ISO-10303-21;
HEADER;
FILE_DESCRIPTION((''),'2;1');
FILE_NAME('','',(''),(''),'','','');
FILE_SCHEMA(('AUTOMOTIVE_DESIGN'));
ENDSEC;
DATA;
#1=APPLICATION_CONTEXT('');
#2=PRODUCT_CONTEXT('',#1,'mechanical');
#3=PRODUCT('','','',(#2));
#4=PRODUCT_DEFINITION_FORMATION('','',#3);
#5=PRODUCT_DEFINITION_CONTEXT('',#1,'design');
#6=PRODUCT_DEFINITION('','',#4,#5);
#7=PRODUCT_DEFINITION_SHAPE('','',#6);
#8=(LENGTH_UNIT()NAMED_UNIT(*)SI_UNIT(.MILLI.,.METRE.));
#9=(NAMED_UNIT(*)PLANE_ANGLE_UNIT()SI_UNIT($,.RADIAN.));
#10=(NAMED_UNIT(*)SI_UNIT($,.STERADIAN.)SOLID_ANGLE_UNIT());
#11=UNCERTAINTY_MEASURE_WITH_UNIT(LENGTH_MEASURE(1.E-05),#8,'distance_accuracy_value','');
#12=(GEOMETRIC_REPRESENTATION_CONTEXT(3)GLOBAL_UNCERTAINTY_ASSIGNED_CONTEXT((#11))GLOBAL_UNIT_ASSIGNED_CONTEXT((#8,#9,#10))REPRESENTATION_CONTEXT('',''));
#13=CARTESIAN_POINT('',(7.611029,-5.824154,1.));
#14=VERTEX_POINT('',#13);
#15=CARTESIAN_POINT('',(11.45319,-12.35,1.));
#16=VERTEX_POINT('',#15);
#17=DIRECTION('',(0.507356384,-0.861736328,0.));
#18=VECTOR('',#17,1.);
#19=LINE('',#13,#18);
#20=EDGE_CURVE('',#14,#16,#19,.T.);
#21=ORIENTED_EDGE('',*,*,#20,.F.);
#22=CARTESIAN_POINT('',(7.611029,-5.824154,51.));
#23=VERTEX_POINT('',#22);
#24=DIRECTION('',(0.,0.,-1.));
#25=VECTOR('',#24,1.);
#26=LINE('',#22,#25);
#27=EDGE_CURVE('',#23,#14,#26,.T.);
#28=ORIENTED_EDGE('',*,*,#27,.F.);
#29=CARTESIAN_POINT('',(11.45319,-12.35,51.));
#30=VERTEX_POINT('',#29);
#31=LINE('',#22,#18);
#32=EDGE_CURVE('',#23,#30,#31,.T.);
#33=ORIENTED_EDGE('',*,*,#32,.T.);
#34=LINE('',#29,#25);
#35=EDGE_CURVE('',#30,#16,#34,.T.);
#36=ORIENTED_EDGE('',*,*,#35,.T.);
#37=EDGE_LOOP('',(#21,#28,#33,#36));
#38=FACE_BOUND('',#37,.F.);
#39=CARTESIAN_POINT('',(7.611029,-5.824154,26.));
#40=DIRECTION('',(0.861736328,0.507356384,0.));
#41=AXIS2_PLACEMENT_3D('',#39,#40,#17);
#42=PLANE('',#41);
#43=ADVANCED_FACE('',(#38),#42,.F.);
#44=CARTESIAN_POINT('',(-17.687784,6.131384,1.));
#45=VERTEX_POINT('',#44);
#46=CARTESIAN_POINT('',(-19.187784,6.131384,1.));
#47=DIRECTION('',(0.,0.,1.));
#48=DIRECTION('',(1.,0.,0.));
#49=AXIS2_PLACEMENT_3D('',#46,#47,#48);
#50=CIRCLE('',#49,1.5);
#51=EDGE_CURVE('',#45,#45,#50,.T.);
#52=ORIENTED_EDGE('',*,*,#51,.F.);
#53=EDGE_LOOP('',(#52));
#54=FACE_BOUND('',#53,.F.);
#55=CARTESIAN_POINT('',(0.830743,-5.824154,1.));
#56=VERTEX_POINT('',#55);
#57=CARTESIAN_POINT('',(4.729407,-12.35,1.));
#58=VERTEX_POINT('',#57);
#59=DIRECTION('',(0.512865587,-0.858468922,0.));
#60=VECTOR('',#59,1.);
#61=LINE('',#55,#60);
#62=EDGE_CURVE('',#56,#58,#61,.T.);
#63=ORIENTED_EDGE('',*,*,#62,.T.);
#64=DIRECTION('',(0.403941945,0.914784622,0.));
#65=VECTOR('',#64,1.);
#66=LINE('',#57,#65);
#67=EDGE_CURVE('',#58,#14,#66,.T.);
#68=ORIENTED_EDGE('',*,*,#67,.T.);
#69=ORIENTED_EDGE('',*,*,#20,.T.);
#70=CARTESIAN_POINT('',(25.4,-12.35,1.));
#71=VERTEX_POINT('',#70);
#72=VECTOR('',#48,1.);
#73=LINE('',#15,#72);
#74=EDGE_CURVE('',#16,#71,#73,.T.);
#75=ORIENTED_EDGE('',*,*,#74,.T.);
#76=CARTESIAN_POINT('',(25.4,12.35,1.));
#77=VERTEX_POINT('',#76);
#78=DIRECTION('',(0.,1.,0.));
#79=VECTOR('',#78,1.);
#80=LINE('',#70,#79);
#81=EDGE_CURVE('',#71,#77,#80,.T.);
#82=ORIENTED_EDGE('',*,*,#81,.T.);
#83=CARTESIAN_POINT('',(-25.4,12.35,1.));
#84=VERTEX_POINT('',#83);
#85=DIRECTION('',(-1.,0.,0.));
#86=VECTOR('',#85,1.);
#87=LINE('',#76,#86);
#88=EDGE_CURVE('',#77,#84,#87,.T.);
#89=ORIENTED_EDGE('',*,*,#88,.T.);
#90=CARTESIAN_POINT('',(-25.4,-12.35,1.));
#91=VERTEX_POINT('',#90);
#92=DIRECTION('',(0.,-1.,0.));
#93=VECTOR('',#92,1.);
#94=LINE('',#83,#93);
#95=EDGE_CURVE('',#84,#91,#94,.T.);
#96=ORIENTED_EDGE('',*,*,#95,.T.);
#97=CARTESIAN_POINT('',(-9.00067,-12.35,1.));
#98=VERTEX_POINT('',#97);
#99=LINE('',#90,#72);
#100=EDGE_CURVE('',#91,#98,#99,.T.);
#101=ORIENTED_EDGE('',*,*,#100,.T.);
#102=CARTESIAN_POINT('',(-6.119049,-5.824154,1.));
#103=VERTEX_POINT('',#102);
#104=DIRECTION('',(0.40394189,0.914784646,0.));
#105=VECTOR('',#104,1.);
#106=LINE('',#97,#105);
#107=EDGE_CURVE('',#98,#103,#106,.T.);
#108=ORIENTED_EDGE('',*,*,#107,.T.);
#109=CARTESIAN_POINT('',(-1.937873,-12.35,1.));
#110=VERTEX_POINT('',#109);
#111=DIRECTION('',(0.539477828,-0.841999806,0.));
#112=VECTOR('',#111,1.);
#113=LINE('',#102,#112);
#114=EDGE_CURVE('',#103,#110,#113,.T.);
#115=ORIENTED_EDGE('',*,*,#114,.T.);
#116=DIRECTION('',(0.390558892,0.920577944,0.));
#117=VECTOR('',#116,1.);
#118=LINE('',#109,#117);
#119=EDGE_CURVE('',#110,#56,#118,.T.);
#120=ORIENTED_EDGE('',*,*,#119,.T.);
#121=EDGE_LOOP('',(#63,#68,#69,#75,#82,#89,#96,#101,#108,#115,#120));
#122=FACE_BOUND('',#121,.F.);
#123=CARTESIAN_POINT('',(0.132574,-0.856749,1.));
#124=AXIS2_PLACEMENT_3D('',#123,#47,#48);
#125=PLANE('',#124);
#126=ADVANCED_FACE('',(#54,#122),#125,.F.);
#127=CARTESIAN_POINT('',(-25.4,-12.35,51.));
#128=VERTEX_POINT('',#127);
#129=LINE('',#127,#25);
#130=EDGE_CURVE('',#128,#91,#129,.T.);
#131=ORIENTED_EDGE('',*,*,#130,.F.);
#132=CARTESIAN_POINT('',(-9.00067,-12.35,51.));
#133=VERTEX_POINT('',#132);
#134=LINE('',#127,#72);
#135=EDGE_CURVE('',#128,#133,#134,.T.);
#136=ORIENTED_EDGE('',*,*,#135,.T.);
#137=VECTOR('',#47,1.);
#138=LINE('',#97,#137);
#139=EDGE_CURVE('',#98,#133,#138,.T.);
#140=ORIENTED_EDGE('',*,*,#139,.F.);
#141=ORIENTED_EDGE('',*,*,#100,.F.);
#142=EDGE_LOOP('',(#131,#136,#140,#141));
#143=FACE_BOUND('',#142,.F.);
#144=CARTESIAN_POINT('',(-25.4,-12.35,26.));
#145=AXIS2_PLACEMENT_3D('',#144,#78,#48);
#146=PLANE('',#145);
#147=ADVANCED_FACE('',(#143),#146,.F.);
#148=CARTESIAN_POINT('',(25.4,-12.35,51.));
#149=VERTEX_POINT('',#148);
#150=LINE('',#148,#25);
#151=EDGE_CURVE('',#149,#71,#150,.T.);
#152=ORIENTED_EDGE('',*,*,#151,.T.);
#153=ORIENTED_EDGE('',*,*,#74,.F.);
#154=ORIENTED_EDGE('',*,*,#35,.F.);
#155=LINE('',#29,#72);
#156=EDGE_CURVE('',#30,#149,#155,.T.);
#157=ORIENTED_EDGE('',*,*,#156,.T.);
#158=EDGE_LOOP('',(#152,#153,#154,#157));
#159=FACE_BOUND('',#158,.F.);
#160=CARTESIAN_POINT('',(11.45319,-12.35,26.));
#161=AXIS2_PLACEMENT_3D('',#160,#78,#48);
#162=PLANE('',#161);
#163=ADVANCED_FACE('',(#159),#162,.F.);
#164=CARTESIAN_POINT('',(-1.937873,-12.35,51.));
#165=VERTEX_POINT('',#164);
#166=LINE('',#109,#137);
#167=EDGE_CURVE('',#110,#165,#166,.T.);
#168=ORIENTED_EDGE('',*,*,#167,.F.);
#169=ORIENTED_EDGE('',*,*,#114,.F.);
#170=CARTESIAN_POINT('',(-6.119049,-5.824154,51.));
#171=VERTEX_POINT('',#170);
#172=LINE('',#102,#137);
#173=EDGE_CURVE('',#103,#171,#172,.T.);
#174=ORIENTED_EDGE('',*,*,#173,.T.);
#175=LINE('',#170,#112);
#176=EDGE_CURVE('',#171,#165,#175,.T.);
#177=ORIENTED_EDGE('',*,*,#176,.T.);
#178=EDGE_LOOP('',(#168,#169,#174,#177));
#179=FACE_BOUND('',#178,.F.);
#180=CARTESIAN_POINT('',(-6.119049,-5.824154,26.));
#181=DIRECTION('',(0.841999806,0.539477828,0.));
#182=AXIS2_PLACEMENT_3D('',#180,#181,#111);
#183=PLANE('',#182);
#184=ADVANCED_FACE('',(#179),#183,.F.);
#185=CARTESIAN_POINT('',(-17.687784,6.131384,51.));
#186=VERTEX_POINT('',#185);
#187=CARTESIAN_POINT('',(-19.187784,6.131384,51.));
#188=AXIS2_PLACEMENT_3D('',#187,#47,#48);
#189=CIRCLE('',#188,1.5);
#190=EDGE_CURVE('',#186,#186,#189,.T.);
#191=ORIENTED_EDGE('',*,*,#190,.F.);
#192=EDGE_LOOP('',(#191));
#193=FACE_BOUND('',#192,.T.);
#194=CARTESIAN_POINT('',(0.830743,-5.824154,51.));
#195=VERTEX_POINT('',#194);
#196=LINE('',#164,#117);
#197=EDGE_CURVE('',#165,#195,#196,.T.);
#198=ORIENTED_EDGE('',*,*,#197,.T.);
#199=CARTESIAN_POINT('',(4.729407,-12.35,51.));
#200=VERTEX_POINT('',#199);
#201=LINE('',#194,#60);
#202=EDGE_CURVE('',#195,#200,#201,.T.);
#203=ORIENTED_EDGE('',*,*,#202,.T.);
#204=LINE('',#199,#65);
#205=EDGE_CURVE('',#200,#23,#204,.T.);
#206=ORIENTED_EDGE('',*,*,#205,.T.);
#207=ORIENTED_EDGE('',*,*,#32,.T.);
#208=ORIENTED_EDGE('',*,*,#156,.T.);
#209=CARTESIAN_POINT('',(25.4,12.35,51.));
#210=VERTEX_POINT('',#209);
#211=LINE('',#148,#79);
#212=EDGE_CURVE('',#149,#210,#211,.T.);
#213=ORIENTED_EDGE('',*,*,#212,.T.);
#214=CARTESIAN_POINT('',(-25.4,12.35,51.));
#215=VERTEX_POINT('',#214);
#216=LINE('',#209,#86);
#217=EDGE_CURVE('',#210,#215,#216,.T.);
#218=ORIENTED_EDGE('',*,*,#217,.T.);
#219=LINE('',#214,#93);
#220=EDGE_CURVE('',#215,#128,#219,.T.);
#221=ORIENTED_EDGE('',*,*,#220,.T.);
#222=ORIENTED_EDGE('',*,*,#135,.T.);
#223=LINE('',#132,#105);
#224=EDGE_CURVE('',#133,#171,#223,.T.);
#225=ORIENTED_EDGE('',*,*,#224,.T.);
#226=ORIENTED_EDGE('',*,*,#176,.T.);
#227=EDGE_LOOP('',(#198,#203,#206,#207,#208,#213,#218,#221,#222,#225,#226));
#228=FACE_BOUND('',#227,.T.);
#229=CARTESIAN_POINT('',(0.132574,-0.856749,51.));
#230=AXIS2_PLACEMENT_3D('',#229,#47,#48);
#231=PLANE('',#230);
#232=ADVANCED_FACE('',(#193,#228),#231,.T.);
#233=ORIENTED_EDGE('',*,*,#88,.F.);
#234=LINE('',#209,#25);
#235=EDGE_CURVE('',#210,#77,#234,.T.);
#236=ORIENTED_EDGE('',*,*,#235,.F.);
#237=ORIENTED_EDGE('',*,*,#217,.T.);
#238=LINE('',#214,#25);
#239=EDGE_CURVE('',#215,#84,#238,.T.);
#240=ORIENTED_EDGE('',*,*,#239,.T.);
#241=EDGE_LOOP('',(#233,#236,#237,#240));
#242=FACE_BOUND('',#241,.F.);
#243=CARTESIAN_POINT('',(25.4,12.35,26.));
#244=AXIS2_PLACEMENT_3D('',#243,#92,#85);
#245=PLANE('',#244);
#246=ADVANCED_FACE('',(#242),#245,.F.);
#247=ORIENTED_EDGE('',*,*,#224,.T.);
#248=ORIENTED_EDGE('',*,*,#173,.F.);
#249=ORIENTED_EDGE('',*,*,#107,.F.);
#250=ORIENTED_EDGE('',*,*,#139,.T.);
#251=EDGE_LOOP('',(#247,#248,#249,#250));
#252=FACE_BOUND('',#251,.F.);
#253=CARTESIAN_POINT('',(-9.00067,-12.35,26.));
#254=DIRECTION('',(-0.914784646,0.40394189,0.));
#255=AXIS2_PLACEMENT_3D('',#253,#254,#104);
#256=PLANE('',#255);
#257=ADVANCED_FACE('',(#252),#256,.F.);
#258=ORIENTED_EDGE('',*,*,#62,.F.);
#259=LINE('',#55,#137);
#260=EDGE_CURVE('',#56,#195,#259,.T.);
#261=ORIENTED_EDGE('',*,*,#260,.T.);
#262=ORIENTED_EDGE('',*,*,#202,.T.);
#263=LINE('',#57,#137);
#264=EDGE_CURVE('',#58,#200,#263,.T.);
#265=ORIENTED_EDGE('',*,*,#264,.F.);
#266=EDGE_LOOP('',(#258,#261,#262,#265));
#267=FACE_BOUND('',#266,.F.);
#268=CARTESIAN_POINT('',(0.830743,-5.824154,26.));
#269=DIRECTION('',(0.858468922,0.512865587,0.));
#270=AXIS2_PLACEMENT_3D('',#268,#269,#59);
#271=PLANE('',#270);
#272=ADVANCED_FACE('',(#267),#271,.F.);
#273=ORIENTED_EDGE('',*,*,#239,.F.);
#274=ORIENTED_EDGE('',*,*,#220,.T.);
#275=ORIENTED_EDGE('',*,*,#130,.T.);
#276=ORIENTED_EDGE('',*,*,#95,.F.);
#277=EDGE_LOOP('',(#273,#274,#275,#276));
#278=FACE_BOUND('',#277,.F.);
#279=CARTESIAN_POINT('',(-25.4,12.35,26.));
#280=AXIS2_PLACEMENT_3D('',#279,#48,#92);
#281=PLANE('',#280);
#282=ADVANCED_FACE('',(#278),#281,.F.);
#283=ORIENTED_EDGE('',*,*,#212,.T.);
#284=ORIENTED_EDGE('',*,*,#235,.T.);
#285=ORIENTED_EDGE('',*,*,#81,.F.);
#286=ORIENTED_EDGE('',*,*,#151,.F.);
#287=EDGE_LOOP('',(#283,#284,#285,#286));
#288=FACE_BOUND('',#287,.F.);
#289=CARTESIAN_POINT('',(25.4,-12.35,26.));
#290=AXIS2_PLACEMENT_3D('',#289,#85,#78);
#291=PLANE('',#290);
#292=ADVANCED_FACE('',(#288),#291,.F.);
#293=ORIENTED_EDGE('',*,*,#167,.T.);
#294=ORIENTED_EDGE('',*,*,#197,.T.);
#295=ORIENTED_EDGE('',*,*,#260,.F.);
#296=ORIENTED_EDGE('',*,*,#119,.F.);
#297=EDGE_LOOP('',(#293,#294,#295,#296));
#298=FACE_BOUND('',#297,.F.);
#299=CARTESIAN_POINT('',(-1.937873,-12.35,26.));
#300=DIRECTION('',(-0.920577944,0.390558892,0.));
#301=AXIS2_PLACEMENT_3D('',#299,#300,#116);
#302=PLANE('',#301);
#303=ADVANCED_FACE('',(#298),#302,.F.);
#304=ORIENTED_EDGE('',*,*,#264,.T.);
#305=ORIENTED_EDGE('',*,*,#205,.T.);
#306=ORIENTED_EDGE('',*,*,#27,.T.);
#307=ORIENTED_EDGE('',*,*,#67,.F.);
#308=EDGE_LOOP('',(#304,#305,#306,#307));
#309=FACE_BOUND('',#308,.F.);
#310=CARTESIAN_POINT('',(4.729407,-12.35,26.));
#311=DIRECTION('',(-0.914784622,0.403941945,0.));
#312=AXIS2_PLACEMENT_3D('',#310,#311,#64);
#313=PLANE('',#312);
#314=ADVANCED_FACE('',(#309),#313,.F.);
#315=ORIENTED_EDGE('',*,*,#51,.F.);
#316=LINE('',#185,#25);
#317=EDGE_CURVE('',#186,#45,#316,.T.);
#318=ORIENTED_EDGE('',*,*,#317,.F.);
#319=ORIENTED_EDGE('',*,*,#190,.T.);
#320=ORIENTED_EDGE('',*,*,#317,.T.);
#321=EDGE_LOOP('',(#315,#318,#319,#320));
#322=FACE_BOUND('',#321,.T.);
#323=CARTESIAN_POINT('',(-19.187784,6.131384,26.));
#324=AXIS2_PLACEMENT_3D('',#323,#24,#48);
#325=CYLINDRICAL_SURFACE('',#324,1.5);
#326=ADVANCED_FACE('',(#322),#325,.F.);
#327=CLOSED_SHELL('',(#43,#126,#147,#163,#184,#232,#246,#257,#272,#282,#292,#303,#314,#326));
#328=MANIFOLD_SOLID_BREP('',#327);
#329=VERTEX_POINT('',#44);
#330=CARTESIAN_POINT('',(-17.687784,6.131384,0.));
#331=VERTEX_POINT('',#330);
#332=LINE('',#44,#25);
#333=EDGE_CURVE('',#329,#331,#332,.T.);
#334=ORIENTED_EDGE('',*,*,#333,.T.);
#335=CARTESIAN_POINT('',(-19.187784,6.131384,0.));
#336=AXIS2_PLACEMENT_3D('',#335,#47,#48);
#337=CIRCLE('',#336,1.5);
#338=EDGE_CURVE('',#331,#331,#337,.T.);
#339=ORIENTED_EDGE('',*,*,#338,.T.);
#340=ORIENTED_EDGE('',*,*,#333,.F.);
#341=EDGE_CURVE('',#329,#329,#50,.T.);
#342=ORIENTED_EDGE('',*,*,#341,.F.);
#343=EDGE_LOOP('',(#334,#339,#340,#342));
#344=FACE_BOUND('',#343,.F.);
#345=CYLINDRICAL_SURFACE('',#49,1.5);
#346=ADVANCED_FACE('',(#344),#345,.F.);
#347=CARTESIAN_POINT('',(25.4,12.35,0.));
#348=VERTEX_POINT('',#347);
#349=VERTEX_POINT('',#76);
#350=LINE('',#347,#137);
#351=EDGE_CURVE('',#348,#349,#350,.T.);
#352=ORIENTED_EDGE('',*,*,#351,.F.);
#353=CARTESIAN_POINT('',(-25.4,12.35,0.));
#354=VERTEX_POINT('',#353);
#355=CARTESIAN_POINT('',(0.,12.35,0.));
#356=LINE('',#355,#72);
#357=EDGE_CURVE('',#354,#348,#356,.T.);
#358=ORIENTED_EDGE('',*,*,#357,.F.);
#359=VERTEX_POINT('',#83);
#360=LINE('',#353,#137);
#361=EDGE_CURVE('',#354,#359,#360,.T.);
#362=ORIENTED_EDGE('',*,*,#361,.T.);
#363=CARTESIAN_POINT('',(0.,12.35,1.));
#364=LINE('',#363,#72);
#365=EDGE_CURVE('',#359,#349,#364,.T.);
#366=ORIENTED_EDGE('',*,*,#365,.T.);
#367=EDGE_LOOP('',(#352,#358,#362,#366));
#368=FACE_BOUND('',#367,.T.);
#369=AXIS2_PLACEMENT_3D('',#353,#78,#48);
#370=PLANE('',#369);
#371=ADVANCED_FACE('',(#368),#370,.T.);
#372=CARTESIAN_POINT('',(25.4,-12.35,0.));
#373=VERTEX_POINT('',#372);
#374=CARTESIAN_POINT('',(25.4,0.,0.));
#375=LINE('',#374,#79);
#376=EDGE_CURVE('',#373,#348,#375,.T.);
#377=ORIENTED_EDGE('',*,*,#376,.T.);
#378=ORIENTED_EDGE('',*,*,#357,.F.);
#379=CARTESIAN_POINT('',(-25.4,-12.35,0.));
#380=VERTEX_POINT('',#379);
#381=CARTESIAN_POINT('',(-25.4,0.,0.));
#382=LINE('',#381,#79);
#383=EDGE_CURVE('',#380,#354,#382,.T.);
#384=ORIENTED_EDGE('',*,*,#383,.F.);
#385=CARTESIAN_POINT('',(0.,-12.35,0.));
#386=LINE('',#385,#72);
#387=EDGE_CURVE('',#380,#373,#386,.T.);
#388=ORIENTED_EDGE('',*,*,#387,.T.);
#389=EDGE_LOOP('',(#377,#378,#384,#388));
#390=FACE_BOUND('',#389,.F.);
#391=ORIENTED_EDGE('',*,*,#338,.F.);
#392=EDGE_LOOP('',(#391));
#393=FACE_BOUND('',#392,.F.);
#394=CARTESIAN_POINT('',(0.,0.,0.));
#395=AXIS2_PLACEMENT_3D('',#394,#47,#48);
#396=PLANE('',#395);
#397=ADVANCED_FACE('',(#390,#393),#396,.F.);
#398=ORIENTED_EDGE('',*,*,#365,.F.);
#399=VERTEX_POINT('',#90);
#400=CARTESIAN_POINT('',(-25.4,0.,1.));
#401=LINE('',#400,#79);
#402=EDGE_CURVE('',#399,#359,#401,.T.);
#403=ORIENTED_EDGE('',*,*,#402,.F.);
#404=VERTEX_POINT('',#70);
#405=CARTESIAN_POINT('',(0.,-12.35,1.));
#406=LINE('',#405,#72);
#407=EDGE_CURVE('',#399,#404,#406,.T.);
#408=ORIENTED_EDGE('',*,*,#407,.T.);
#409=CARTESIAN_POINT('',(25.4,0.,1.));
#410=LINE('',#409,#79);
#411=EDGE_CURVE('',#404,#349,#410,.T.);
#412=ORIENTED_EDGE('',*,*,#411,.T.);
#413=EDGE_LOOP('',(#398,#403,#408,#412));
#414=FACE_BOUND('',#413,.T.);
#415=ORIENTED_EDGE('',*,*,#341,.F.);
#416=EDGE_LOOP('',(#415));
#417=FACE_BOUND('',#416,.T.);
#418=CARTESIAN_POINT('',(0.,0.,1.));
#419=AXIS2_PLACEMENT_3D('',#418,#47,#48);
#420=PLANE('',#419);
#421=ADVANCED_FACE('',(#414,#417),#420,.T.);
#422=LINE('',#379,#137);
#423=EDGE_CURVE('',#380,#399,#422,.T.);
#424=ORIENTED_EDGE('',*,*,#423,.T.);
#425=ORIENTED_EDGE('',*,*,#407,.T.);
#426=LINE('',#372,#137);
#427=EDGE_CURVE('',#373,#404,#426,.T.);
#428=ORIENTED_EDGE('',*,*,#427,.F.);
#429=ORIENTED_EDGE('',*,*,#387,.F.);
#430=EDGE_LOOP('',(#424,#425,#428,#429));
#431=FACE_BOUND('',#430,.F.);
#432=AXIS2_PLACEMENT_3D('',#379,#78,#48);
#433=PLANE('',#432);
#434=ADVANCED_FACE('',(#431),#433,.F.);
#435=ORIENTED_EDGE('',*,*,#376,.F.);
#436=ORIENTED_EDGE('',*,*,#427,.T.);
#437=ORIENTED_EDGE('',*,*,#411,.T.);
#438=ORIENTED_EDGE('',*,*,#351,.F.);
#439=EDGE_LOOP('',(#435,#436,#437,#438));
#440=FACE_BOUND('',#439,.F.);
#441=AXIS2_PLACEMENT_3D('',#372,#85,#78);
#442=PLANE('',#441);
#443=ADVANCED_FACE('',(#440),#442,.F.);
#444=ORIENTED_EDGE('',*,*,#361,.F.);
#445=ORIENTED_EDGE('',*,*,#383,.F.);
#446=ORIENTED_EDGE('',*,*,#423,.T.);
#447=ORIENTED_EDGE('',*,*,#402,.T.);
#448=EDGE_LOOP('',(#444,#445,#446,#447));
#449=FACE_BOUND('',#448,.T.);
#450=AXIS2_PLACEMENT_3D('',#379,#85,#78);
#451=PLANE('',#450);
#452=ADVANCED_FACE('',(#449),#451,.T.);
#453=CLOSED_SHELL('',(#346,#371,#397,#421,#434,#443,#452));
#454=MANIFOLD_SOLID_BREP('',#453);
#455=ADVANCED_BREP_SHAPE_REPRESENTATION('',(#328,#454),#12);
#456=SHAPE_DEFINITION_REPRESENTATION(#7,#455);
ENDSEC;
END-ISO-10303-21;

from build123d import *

# Parameters (mm, degrees)
F0_W     = 50.8
F0_H     = 24.7
F1_DEPTH = 1
F2_R     = 1.5
F3_DEPTH = 25
F4_R     = 1.5
F5_DEPTH = 25
F6_DEPTH = 25


# Not quite as in the source:
# - a feature of the source that left no trace in its solid (it failed there, or was rolled back) is left out


with BuildPart() as f1:
    # F0 (on Top) → F1 (new body)
    with BuildSketch(Plane.XY):
        Rectangle(F0_W, F0_H)
    extrude(amount=F1_DEPTH)

    # F2 (on face) → F3 (cut)
    with BuildSketch(Plane.XY.offset(1)):
        with Locations((-19.1877838224, 6.1313840561)):
            Circle(F2_R)
    extrude(amount=-F3_DEPTH, mode=Mode.SUBTRACT)


with BuildPart() as f5:
    # F4 (on face) → F5 (new body)
    with BuildSketch(Plane.XY.offset(1)):
        Polygon((-25.4, -12.35), (-9.0006701648, -12.35), (-6.1190491542, -5.8241537772), (-1.9378731959, -12.35), (0.8307432872, -5.8241537772), (4.7294073738, -12.35), (7.6110288501, -5.8241537772), (11.4531898871, -12.35), (25.4, -12.35), (25.4, 12.35), (-25.4, 12.35), align=None)
        with Locations((-19.1877838224, 6.1313840561)):
            Circle(F4_R, mode=Mode.SUBTRACT)
    extrude(amount=F5_DEPTH)

    # F6 (add): a face of the model
    f6_faces = [f5.faces().sort_by_distance(p)[0] for p in [
        (0.0562187638, 0.5383064409, 26),
    ]]
    extrude(f6_faces, amount=F6_DEPTH)


solid = Compound([f1.part, f5.part])
